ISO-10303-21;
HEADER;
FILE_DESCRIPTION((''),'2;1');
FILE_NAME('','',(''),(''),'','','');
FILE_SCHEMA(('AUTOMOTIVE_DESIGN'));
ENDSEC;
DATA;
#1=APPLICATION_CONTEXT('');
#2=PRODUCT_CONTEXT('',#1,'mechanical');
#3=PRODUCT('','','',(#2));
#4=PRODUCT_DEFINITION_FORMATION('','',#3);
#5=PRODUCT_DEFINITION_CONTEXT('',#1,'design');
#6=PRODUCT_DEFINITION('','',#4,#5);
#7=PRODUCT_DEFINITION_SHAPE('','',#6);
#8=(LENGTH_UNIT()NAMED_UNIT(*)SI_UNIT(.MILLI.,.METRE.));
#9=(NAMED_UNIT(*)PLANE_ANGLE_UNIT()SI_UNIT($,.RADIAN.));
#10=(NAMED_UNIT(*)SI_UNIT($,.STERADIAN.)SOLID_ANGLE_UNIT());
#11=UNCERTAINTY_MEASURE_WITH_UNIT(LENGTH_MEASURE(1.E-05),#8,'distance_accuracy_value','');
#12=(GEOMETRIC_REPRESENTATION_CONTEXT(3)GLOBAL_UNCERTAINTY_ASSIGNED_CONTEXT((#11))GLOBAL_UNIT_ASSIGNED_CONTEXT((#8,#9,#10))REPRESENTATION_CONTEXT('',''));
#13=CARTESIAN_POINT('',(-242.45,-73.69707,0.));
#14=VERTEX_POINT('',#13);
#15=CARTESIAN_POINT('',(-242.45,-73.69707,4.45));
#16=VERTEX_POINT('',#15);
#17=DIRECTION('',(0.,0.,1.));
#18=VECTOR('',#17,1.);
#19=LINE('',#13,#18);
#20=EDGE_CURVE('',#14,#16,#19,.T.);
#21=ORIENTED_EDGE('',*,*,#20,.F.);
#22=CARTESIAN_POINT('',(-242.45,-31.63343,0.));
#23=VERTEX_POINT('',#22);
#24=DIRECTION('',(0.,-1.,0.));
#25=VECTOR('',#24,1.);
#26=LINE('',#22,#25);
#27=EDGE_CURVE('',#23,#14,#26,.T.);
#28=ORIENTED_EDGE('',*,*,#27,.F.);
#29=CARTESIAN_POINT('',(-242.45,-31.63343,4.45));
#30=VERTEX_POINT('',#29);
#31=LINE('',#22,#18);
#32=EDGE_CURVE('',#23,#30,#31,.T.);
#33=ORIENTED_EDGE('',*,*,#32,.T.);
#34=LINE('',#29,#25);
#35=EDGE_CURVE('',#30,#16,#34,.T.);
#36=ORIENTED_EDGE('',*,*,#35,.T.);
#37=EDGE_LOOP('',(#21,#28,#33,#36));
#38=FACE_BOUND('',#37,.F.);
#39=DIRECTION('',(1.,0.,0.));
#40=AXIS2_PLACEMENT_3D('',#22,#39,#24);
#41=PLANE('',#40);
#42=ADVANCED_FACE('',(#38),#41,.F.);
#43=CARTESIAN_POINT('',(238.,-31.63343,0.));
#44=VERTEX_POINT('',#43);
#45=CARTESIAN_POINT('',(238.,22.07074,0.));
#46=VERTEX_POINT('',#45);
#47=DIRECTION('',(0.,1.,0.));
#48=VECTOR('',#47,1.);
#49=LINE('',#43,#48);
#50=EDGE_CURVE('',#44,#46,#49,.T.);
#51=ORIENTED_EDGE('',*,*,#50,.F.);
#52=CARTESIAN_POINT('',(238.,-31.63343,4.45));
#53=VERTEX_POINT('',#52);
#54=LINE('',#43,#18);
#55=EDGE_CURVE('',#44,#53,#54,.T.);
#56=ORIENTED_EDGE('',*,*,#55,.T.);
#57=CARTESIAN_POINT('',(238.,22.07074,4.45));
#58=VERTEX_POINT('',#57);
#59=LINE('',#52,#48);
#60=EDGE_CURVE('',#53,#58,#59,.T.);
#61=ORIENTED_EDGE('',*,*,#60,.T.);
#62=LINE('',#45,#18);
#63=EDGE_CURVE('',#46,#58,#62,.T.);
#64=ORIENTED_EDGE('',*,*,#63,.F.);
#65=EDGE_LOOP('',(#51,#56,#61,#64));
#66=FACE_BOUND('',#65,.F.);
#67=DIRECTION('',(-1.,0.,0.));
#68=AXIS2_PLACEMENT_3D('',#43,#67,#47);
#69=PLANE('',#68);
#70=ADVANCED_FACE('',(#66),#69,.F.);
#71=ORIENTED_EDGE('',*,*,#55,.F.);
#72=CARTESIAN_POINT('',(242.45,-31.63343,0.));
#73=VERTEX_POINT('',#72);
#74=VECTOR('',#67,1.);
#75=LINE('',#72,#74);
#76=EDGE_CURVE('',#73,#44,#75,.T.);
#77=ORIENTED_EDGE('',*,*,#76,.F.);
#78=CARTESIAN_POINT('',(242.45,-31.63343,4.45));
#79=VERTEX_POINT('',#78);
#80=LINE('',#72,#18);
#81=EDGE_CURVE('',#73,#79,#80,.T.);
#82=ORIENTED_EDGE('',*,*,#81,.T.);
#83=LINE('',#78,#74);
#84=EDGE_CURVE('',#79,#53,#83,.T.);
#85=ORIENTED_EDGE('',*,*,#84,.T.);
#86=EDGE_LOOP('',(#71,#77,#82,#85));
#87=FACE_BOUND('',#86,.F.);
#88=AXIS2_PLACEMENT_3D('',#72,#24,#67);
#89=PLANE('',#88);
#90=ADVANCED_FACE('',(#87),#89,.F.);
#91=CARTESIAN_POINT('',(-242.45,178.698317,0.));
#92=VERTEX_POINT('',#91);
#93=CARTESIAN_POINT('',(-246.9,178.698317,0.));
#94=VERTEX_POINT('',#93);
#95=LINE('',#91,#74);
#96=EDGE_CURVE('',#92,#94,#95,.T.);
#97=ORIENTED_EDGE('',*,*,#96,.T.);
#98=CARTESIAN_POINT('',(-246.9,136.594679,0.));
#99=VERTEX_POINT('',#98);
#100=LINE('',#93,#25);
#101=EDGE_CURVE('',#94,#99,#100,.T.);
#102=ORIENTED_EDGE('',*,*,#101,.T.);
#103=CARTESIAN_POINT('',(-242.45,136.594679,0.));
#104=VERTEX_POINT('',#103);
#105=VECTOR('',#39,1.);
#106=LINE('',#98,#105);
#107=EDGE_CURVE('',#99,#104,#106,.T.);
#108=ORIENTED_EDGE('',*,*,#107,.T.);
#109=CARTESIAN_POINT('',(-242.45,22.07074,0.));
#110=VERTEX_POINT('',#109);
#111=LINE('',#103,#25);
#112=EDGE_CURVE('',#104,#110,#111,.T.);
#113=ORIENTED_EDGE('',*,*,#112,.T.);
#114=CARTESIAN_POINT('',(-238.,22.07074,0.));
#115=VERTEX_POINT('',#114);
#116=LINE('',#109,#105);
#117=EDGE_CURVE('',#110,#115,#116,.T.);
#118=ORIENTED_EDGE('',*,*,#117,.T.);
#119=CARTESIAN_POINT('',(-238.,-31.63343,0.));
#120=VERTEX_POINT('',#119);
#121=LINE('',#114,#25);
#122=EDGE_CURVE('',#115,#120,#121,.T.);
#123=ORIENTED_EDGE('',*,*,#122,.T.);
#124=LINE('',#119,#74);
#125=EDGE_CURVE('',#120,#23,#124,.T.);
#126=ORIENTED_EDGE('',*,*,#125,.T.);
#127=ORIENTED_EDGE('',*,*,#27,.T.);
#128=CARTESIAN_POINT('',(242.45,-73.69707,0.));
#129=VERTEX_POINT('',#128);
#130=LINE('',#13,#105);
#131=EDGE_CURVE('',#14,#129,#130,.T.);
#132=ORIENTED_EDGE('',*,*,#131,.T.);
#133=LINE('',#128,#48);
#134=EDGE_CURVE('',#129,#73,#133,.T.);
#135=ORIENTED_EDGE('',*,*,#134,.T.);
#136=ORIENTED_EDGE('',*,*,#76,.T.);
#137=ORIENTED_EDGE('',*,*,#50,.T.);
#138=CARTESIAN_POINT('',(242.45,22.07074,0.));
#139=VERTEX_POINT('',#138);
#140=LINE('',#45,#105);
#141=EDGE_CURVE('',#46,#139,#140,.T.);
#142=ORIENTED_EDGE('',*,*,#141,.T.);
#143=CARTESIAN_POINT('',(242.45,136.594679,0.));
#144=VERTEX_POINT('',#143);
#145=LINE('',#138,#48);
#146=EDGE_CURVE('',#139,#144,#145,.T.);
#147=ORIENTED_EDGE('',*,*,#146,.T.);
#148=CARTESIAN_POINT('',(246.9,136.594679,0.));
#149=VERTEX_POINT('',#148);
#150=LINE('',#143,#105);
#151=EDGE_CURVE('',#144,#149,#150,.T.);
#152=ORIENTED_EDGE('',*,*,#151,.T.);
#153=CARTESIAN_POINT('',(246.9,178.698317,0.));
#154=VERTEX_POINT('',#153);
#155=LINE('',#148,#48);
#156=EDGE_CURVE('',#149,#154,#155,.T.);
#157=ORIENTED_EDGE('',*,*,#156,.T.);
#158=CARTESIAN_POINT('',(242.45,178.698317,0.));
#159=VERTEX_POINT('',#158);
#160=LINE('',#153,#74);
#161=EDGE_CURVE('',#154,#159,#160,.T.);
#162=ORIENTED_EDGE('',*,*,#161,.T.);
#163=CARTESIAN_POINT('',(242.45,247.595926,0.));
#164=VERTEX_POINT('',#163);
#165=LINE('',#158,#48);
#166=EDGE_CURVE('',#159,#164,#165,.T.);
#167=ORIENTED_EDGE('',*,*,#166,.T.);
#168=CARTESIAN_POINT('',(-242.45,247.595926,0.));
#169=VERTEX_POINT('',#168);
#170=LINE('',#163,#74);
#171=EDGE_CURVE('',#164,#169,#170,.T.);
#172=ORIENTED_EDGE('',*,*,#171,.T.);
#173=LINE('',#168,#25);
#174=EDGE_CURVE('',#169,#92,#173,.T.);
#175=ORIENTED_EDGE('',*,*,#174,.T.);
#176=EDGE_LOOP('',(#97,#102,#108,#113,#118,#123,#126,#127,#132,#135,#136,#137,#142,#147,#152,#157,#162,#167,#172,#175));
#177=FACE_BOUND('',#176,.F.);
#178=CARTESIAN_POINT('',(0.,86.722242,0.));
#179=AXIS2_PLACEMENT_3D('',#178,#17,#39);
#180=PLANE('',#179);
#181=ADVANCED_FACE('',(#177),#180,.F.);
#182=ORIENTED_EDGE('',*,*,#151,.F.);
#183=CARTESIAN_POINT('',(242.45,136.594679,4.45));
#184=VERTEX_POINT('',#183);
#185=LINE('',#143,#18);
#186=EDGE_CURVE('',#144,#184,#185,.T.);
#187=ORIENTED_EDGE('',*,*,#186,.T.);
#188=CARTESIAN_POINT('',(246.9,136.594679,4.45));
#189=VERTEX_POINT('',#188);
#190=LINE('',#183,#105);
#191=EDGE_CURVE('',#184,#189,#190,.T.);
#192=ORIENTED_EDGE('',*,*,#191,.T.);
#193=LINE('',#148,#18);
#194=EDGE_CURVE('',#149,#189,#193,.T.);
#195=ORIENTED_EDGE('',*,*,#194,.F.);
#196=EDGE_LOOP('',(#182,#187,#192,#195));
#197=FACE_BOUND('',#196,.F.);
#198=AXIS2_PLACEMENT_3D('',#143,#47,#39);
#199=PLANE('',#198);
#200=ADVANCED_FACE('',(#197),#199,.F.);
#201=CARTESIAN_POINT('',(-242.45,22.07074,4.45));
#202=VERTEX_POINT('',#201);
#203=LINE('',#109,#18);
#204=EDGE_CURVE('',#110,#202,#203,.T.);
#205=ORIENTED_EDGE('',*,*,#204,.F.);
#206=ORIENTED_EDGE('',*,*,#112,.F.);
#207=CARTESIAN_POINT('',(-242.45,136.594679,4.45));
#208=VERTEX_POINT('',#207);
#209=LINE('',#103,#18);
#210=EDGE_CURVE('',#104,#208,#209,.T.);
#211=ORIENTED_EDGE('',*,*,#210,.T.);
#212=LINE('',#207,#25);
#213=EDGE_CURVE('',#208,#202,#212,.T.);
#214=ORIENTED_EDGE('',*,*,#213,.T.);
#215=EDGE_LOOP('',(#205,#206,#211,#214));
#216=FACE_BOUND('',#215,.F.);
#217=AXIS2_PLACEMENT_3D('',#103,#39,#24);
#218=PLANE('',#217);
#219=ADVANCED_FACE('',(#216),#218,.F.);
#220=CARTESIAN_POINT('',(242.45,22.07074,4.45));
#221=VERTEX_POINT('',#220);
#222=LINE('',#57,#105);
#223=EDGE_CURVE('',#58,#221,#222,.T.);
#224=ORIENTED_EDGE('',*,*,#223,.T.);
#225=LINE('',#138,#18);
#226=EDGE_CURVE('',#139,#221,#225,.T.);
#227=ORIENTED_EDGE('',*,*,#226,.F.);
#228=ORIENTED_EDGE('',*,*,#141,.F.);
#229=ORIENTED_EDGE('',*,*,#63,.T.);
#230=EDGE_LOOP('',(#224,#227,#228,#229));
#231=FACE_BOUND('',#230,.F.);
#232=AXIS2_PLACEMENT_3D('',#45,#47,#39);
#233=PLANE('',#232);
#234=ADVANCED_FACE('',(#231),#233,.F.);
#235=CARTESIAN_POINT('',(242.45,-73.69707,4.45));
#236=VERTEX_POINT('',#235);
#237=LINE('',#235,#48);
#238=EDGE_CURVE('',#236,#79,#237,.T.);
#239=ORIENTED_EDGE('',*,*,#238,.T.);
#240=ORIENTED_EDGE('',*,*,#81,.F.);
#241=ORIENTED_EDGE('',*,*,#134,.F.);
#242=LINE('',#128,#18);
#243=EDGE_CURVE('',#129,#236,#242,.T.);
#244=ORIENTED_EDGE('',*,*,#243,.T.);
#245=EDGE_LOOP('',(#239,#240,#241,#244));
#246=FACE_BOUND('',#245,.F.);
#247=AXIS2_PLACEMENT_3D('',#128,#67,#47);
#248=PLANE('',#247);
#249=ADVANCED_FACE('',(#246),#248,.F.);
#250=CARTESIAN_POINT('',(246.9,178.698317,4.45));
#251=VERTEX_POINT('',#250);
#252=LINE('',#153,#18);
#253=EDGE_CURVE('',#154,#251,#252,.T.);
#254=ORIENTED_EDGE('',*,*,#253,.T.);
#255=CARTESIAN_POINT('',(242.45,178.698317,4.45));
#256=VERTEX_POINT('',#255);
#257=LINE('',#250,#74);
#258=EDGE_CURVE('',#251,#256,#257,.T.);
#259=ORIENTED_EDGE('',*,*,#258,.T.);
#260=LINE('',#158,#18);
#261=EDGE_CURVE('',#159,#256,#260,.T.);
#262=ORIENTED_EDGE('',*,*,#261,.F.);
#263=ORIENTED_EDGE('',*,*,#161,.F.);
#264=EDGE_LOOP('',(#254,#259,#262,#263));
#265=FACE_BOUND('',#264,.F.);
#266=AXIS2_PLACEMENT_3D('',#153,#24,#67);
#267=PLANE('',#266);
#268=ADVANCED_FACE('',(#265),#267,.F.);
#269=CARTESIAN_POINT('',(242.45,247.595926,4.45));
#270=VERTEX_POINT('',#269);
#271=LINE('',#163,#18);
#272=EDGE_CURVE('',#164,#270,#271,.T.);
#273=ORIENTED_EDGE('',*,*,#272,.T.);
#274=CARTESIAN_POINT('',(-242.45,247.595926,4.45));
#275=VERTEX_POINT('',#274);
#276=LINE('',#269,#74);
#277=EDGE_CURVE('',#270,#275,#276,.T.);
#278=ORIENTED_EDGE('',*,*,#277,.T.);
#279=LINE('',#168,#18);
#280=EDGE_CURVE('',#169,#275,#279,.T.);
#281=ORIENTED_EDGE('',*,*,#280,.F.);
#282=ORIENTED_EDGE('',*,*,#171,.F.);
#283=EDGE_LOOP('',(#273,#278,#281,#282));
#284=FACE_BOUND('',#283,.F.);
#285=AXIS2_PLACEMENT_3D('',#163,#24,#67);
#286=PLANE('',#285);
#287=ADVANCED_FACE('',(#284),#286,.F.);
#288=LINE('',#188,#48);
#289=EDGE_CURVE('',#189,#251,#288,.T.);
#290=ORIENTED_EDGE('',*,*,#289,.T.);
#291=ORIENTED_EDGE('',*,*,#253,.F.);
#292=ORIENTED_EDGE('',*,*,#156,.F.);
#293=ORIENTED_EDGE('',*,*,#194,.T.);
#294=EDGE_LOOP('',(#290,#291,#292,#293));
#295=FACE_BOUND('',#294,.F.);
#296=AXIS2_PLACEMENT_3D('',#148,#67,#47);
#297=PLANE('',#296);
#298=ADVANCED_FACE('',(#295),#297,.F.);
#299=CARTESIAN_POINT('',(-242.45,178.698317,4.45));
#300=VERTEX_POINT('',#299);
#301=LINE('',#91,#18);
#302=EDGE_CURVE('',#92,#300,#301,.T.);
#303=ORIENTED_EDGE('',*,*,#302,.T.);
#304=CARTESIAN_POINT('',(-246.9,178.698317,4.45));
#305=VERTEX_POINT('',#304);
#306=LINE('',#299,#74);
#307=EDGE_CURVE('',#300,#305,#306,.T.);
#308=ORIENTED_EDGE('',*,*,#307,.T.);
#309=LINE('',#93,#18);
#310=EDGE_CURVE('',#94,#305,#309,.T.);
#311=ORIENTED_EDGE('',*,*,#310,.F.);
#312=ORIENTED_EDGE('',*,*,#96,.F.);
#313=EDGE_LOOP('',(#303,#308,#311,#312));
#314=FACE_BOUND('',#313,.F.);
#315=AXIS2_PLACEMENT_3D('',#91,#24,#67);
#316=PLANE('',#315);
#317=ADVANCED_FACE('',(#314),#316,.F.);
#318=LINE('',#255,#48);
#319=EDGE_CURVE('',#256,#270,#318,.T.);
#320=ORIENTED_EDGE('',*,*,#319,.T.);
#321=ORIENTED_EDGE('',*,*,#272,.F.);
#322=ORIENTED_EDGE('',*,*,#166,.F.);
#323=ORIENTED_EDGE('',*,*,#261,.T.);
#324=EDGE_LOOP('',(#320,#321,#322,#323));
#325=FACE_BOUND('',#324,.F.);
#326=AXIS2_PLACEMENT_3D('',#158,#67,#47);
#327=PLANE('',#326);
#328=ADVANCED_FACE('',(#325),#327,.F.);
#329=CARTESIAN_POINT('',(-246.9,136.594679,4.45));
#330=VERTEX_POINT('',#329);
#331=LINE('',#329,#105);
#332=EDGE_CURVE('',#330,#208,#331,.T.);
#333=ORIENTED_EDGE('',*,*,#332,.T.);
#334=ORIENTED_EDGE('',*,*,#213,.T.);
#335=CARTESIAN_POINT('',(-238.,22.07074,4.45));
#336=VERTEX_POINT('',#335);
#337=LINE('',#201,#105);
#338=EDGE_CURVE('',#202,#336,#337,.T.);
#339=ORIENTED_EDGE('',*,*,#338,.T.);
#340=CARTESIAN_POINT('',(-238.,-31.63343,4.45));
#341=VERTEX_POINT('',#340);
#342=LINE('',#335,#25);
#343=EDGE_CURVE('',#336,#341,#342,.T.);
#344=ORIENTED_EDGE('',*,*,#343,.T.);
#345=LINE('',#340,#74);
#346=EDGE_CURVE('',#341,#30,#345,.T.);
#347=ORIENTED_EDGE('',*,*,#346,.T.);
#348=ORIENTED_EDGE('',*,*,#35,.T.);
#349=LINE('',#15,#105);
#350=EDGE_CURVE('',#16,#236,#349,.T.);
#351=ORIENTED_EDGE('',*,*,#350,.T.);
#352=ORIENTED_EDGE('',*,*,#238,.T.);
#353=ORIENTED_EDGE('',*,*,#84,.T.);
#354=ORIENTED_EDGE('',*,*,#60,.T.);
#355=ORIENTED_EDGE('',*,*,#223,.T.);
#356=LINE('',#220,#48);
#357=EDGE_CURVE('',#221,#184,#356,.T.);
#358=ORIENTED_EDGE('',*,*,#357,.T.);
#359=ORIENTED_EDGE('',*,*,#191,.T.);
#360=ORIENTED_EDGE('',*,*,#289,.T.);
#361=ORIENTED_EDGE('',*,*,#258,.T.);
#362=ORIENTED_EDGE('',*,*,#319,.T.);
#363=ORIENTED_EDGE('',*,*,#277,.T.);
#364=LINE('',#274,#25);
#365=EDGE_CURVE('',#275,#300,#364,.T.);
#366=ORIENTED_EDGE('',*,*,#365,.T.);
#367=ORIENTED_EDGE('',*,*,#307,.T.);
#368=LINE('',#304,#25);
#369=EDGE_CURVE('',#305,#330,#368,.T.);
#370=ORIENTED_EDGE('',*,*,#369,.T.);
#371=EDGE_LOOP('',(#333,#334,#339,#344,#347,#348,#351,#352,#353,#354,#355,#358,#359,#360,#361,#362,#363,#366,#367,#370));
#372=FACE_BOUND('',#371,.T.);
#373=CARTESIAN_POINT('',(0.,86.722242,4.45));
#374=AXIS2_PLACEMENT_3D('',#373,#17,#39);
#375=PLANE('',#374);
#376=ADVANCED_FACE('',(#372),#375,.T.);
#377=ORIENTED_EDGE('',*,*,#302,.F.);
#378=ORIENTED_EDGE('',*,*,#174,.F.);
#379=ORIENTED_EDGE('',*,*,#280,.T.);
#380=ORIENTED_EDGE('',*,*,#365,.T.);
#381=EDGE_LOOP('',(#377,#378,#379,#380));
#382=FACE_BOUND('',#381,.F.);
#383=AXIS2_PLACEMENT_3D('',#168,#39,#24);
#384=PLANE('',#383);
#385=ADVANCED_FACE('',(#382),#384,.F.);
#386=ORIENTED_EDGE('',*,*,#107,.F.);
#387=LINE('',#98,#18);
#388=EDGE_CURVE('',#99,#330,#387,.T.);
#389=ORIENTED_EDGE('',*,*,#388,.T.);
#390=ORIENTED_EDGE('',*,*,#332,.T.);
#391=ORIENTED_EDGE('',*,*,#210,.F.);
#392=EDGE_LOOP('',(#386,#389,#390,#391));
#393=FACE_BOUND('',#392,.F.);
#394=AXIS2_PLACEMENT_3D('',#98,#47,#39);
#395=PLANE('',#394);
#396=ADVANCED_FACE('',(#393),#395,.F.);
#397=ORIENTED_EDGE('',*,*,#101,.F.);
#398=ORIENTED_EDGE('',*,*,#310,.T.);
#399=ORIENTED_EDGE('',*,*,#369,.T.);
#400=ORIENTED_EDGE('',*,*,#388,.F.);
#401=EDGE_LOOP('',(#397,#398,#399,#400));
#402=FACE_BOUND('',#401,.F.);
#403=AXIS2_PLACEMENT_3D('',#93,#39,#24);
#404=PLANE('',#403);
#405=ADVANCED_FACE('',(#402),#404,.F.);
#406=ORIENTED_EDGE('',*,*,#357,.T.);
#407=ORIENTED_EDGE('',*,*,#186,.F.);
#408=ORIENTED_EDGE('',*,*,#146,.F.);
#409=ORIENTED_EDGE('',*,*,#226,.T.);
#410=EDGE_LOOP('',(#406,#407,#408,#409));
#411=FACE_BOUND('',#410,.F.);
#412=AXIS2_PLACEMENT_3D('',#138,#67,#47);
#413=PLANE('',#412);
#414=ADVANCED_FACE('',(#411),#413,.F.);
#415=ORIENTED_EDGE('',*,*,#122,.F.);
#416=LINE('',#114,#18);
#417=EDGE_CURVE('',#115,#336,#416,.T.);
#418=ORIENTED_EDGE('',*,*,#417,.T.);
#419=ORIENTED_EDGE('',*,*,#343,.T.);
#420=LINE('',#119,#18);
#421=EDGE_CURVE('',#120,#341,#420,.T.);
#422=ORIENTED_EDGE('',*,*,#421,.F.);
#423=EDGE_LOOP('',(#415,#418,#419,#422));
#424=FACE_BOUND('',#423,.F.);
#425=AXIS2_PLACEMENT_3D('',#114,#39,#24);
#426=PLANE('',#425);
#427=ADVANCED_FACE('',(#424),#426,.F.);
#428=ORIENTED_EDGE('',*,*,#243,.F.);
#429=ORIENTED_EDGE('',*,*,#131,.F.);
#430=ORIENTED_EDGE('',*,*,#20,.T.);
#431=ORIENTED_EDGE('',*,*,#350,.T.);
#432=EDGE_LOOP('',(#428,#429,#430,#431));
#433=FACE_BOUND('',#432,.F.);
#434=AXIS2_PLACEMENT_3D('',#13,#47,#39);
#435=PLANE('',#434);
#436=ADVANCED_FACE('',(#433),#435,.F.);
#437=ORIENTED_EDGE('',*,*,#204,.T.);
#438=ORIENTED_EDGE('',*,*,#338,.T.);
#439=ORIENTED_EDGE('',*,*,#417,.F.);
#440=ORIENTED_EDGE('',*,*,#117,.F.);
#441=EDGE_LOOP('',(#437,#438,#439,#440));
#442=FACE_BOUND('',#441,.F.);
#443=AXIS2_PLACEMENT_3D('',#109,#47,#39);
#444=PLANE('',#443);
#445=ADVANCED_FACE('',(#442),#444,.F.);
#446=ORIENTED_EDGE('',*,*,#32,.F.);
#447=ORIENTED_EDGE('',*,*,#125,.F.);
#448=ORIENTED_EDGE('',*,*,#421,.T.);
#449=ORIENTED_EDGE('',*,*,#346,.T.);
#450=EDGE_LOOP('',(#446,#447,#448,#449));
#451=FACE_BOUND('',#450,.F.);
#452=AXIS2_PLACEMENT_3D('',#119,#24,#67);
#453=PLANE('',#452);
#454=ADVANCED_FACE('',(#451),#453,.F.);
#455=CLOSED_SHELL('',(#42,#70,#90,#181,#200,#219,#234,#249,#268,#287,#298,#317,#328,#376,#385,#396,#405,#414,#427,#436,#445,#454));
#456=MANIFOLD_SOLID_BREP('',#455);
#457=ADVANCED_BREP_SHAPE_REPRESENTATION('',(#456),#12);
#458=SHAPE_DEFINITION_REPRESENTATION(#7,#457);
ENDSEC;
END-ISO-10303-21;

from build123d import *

# Parameters (mm, degrees)
F1_DEPTH = 4.45


# Not quite as in the source:
# - a feature names something its author has since deleted; it is built from what else it names


with BuildPart() as f1:
    # F0 (on Top) → F1 (new body)
    with BuildSketch(Plane.XY):
        Polygon((-238, -73.69707), (238, -73.69707), (242.45, -73.69707), (242.45, -31.63343), (238, -31.63343), (238, -28.2489694095), (238, 22.07074), (242.45, 22.07074), (242.45, 75.69707), (242.45, 77.69707), (242.45, 136.5946788788), (246.9, 136.5946788788), (246.9, 178.6983170484), (242.45, 178.6983170484), (242.45, 237.5959259272), (242.45, 247.5959259272), (232.45, 247.5959259272), (-232.45, 247.5959259272), (-242.45, 247.5959259272), (-242.45, 237.5959259272), (-242.45, 178.6983170484), (-246.9, 178.6983170484), (-246.9, 136.5946788788), (-242.45, 136.5946788788), (-242.45, 75.69707), (-242.45, 22.07074), (-238, 22.07074), (-238, -31.63343), (-242.45, -31.63343), (-242.45, -73.69707), align=None)
    extrude(amount=F1_DEPTH)


solid = f1.part
